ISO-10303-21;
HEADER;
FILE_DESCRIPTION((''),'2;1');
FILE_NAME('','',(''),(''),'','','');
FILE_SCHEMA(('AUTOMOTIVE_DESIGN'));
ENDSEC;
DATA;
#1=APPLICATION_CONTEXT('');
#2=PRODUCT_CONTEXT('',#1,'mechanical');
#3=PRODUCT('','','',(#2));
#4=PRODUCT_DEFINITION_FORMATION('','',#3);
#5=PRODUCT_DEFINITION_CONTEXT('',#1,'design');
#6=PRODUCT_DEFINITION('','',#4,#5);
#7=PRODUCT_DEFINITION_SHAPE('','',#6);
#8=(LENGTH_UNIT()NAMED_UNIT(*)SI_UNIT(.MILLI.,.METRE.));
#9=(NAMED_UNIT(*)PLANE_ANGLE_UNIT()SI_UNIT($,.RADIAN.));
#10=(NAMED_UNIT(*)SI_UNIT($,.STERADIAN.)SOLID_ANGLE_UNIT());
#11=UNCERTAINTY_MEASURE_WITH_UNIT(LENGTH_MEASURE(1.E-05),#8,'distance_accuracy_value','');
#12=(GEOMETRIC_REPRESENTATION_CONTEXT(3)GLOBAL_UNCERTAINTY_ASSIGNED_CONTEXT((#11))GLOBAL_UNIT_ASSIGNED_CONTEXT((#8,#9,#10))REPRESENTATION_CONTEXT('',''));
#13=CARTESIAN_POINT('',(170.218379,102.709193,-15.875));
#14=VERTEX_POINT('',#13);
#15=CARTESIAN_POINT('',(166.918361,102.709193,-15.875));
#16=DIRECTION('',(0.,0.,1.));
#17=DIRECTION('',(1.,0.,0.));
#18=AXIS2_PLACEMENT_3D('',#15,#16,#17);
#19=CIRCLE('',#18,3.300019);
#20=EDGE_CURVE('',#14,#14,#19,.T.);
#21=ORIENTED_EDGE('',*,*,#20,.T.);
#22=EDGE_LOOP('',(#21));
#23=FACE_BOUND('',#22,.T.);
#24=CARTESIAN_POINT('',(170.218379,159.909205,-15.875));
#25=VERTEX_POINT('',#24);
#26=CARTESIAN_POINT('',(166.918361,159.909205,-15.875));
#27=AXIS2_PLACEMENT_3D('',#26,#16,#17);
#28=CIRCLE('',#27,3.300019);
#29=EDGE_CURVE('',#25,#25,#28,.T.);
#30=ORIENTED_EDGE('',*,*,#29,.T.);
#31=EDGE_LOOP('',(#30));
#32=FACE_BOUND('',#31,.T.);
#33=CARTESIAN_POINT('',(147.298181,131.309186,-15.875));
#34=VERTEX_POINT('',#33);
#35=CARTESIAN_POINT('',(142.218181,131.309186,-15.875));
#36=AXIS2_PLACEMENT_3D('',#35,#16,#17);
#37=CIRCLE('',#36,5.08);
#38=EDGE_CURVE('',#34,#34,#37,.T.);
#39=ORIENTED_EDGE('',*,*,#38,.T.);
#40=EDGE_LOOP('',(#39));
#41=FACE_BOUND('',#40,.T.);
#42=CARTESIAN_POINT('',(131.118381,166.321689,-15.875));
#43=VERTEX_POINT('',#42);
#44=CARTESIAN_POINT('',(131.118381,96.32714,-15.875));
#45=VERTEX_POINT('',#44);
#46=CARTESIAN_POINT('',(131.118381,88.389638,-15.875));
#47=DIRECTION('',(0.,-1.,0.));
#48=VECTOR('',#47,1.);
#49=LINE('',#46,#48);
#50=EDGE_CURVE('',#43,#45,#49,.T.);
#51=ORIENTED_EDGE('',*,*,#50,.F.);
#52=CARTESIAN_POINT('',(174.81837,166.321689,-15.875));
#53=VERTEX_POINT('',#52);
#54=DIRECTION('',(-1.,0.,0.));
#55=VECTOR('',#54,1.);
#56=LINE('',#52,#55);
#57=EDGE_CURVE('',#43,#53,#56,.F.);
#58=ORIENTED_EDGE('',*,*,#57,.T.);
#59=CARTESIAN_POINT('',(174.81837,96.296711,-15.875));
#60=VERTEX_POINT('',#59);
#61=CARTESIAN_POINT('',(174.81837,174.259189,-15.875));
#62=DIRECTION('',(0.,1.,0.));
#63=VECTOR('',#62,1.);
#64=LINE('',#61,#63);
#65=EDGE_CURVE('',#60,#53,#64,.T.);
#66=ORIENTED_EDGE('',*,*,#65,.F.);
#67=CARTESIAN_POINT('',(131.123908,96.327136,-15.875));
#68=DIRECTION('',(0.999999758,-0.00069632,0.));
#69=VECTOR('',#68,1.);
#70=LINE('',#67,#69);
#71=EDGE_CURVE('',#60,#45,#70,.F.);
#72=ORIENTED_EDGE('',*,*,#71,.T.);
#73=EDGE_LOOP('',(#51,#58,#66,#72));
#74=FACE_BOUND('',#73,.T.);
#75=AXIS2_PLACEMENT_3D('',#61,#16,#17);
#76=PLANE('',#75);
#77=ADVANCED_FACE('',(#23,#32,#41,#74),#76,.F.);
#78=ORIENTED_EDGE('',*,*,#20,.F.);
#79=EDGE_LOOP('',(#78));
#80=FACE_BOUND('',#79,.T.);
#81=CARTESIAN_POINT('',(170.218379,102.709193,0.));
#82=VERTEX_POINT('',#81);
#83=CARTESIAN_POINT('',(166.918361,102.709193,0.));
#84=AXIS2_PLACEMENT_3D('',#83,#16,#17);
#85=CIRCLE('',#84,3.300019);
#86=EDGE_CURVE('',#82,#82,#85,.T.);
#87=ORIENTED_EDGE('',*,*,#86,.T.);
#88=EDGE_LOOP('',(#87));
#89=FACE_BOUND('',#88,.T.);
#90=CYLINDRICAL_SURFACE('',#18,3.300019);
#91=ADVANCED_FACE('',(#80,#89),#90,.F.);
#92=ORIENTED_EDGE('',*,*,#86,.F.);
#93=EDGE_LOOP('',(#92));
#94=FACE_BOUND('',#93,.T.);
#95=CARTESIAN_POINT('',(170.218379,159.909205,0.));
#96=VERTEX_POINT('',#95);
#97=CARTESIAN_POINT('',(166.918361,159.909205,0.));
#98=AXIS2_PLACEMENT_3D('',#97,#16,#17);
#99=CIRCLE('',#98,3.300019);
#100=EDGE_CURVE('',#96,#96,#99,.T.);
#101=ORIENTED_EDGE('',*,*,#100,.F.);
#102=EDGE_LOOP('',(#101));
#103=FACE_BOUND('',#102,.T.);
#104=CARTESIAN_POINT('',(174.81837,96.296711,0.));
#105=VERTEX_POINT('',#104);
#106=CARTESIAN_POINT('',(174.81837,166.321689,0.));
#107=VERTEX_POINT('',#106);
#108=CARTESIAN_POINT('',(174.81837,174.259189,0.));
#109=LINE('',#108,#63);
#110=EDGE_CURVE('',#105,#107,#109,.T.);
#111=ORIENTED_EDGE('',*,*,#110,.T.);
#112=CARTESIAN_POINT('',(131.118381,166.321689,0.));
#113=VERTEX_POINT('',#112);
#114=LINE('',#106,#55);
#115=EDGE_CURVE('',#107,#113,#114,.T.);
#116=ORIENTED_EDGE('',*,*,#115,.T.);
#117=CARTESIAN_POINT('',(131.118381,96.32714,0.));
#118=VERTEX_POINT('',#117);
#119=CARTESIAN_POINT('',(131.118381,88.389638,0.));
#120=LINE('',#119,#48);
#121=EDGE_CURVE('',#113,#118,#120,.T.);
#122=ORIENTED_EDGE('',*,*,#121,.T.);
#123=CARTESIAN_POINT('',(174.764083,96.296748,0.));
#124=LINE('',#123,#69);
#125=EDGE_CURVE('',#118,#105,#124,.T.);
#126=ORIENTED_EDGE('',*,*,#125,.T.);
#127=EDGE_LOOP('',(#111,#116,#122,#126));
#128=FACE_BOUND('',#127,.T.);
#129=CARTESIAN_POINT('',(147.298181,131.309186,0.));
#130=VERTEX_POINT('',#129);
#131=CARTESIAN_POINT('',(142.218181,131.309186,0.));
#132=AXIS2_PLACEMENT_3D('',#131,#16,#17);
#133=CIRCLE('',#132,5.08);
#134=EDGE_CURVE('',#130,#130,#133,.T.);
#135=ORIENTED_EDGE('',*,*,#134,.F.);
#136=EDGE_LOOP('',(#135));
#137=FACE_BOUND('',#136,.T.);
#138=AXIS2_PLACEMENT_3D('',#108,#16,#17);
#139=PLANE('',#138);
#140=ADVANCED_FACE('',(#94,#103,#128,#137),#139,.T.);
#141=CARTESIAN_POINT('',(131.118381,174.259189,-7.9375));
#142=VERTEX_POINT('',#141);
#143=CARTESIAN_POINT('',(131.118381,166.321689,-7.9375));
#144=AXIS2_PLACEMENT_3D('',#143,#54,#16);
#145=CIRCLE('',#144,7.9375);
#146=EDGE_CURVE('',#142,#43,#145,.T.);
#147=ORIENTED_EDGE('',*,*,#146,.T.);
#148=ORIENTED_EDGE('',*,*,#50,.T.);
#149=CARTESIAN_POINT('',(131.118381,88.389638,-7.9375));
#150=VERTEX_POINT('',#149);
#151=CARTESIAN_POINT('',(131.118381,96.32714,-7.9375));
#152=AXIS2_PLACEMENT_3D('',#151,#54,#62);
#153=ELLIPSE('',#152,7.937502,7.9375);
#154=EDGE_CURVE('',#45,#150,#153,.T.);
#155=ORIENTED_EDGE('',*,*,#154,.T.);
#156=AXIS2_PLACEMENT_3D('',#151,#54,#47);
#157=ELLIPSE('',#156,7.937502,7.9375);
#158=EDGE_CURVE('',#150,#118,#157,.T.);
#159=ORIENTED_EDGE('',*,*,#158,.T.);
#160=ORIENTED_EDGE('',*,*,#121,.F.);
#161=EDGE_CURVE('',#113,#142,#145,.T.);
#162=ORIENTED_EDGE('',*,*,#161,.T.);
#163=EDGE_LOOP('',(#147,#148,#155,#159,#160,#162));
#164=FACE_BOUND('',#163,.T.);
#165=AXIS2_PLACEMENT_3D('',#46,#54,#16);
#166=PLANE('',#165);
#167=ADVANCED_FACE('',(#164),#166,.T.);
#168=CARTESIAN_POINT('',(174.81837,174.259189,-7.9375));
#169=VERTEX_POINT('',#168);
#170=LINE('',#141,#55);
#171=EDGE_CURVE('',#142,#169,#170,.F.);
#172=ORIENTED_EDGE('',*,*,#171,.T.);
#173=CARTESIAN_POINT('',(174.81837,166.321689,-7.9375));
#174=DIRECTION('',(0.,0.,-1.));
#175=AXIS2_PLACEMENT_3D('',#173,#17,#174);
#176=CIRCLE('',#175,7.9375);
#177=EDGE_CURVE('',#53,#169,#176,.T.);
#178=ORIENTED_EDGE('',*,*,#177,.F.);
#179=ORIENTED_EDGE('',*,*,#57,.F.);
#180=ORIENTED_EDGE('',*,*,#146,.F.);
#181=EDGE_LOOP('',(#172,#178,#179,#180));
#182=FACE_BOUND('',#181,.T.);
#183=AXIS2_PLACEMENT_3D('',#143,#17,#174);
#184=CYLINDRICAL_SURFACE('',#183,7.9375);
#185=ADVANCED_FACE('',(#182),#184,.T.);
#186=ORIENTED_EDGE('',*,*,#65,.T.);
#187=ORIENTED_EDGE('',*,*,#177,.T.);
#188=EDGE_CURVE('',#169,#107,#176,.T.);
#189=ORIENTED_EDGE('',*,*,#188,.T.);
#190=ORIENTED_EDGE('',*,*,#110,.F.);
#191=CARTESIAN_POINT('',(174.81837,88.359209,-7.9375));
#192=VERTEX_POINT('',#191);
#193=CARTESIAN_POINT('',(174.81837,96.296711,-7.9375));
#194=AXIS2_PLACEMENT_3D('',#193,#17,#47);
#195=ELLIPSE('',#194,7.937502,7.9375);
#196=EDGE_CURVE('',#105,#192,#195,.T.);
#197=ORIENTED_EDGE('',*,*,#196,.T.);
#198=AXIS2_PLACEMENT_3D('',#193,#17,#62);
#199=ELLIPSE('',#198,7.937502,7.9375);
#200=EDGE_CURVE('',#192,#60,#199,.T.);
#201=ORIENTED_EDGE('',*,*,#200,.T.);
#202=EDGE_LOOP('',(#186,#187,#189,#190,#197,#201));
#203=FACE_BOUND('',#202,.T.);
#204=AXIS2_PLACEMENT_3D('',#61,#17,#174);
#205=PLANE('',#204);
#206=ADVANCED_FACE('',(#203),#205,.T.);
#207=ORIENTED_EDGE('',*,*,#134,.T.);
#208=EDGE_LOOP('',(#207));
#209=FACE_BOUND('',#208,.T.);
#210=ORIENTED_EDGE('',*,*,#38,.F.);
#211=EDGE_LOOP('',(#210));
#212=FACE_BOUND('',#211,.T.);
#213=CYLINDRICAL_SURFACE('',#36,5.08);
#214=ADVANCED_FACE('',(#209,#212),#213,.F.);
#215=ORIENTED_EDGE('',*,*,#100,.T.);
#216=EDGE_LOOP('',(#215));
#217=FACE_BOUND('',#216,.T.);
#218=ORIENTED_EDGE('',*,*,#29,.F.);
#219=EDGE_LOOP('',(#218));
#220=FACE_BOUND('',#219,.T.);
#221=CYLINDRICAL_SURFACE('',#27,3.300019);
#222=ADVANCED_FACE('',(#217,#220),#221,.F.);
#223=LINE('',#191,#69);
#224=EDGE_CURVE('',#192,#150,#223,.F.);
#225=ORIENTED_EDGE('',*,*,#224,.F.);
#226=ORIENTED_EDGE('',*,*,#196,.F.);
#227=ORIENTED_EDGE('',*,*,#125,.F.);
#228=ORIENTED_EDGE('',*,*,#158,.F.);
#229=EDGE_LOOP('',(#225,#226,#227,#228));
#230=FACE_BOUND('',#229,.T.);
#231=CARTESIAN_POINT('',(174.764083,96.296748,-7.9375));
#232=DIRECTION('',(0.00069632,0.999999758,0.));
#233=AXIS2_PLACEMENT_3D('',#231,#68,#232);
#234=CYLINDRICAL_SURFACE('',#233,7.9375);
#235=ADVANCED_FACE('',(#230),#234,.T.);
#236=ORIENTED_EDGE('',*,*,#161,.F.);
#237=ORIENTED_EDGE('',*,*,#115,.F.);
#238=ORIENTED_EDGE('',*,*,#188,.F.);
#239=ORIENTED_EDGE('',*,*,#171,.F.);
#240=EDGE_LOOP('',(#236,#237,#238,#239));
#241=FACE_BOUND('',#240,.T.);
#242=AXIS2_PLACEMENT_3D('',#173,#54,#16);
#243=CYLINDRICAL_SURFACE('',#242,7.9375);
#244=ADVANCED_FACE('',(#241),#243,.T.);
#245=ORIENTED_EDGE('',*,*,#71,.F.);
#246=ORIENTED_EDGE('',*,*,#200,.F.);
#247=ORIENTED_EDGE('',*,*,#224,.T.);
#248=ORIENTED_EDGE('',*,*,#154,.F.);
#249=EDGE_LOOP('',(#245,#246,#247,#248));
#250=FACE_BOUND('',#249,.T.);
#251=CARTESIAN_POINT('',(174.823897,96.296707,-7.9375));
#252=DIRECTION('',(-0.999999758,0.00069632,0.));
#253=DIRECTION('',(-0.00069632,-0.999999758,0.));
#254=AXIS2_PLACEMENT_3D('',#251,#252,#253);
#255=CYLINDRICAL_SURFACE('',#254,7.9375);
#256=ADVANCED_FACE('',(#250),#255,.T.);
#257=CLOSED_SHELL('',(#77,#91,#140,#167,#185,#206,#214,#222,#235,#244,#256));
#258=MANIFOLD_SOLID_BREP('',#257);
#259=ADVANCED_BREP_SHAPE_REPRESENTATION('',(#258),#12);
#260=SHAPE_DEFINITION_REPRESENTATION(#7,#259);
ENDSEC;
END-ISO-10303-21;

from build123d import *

# Parameters (mm, degrees)
SKETCH1_R      = 3.3000188
SKETCH1_R_2    = 5.08
EXTRUDE1_DEPTH = 15.875
FILLET1_R      = 7.9375


with BuildPart() as part:
    # Sketch1 → Extrude1 (new body)
    with BuildSketch(Plane.XY):
        Polygon((174.8183702, 88.3592086), (131.1183814, 88.3896378), (131.1183814, 174.2591892), (174.8183702, 174.2591892), align=None)
        with Locations((166.9183606, 159.9092052)):
            Circle(SKETCH1_R, mode=Mode.SUBTRACT)
        with Locations((166.9183606, 102.7091926)):
            Circle(SKETCH1_R, mode=Mode.SUBTRACT)
        with Locations((142.2181814, 131.3091862)):
            Circle(SKETCH1_R_2, mode=Mode.SUBTRACT)
    extrude(amount=-EXTRUDE1_DEPTH)

    # Fillet1
    fillet1_edges = [part.edges().sort_by_distance(p)[0] for p in [
        (152.9683758, 88.3744232, -15.875),
        (152.9683758, 88.3744232, 0),
        (152.9683758, 174.2591892, -15.875),
        (152.9683758, 174.2591892, 0),
    ]]
    fillet(fillet1_edges, radius=FILLET1_R - 0.0001)  # a hair under: the kernel refuses the full size


solid = part.part
